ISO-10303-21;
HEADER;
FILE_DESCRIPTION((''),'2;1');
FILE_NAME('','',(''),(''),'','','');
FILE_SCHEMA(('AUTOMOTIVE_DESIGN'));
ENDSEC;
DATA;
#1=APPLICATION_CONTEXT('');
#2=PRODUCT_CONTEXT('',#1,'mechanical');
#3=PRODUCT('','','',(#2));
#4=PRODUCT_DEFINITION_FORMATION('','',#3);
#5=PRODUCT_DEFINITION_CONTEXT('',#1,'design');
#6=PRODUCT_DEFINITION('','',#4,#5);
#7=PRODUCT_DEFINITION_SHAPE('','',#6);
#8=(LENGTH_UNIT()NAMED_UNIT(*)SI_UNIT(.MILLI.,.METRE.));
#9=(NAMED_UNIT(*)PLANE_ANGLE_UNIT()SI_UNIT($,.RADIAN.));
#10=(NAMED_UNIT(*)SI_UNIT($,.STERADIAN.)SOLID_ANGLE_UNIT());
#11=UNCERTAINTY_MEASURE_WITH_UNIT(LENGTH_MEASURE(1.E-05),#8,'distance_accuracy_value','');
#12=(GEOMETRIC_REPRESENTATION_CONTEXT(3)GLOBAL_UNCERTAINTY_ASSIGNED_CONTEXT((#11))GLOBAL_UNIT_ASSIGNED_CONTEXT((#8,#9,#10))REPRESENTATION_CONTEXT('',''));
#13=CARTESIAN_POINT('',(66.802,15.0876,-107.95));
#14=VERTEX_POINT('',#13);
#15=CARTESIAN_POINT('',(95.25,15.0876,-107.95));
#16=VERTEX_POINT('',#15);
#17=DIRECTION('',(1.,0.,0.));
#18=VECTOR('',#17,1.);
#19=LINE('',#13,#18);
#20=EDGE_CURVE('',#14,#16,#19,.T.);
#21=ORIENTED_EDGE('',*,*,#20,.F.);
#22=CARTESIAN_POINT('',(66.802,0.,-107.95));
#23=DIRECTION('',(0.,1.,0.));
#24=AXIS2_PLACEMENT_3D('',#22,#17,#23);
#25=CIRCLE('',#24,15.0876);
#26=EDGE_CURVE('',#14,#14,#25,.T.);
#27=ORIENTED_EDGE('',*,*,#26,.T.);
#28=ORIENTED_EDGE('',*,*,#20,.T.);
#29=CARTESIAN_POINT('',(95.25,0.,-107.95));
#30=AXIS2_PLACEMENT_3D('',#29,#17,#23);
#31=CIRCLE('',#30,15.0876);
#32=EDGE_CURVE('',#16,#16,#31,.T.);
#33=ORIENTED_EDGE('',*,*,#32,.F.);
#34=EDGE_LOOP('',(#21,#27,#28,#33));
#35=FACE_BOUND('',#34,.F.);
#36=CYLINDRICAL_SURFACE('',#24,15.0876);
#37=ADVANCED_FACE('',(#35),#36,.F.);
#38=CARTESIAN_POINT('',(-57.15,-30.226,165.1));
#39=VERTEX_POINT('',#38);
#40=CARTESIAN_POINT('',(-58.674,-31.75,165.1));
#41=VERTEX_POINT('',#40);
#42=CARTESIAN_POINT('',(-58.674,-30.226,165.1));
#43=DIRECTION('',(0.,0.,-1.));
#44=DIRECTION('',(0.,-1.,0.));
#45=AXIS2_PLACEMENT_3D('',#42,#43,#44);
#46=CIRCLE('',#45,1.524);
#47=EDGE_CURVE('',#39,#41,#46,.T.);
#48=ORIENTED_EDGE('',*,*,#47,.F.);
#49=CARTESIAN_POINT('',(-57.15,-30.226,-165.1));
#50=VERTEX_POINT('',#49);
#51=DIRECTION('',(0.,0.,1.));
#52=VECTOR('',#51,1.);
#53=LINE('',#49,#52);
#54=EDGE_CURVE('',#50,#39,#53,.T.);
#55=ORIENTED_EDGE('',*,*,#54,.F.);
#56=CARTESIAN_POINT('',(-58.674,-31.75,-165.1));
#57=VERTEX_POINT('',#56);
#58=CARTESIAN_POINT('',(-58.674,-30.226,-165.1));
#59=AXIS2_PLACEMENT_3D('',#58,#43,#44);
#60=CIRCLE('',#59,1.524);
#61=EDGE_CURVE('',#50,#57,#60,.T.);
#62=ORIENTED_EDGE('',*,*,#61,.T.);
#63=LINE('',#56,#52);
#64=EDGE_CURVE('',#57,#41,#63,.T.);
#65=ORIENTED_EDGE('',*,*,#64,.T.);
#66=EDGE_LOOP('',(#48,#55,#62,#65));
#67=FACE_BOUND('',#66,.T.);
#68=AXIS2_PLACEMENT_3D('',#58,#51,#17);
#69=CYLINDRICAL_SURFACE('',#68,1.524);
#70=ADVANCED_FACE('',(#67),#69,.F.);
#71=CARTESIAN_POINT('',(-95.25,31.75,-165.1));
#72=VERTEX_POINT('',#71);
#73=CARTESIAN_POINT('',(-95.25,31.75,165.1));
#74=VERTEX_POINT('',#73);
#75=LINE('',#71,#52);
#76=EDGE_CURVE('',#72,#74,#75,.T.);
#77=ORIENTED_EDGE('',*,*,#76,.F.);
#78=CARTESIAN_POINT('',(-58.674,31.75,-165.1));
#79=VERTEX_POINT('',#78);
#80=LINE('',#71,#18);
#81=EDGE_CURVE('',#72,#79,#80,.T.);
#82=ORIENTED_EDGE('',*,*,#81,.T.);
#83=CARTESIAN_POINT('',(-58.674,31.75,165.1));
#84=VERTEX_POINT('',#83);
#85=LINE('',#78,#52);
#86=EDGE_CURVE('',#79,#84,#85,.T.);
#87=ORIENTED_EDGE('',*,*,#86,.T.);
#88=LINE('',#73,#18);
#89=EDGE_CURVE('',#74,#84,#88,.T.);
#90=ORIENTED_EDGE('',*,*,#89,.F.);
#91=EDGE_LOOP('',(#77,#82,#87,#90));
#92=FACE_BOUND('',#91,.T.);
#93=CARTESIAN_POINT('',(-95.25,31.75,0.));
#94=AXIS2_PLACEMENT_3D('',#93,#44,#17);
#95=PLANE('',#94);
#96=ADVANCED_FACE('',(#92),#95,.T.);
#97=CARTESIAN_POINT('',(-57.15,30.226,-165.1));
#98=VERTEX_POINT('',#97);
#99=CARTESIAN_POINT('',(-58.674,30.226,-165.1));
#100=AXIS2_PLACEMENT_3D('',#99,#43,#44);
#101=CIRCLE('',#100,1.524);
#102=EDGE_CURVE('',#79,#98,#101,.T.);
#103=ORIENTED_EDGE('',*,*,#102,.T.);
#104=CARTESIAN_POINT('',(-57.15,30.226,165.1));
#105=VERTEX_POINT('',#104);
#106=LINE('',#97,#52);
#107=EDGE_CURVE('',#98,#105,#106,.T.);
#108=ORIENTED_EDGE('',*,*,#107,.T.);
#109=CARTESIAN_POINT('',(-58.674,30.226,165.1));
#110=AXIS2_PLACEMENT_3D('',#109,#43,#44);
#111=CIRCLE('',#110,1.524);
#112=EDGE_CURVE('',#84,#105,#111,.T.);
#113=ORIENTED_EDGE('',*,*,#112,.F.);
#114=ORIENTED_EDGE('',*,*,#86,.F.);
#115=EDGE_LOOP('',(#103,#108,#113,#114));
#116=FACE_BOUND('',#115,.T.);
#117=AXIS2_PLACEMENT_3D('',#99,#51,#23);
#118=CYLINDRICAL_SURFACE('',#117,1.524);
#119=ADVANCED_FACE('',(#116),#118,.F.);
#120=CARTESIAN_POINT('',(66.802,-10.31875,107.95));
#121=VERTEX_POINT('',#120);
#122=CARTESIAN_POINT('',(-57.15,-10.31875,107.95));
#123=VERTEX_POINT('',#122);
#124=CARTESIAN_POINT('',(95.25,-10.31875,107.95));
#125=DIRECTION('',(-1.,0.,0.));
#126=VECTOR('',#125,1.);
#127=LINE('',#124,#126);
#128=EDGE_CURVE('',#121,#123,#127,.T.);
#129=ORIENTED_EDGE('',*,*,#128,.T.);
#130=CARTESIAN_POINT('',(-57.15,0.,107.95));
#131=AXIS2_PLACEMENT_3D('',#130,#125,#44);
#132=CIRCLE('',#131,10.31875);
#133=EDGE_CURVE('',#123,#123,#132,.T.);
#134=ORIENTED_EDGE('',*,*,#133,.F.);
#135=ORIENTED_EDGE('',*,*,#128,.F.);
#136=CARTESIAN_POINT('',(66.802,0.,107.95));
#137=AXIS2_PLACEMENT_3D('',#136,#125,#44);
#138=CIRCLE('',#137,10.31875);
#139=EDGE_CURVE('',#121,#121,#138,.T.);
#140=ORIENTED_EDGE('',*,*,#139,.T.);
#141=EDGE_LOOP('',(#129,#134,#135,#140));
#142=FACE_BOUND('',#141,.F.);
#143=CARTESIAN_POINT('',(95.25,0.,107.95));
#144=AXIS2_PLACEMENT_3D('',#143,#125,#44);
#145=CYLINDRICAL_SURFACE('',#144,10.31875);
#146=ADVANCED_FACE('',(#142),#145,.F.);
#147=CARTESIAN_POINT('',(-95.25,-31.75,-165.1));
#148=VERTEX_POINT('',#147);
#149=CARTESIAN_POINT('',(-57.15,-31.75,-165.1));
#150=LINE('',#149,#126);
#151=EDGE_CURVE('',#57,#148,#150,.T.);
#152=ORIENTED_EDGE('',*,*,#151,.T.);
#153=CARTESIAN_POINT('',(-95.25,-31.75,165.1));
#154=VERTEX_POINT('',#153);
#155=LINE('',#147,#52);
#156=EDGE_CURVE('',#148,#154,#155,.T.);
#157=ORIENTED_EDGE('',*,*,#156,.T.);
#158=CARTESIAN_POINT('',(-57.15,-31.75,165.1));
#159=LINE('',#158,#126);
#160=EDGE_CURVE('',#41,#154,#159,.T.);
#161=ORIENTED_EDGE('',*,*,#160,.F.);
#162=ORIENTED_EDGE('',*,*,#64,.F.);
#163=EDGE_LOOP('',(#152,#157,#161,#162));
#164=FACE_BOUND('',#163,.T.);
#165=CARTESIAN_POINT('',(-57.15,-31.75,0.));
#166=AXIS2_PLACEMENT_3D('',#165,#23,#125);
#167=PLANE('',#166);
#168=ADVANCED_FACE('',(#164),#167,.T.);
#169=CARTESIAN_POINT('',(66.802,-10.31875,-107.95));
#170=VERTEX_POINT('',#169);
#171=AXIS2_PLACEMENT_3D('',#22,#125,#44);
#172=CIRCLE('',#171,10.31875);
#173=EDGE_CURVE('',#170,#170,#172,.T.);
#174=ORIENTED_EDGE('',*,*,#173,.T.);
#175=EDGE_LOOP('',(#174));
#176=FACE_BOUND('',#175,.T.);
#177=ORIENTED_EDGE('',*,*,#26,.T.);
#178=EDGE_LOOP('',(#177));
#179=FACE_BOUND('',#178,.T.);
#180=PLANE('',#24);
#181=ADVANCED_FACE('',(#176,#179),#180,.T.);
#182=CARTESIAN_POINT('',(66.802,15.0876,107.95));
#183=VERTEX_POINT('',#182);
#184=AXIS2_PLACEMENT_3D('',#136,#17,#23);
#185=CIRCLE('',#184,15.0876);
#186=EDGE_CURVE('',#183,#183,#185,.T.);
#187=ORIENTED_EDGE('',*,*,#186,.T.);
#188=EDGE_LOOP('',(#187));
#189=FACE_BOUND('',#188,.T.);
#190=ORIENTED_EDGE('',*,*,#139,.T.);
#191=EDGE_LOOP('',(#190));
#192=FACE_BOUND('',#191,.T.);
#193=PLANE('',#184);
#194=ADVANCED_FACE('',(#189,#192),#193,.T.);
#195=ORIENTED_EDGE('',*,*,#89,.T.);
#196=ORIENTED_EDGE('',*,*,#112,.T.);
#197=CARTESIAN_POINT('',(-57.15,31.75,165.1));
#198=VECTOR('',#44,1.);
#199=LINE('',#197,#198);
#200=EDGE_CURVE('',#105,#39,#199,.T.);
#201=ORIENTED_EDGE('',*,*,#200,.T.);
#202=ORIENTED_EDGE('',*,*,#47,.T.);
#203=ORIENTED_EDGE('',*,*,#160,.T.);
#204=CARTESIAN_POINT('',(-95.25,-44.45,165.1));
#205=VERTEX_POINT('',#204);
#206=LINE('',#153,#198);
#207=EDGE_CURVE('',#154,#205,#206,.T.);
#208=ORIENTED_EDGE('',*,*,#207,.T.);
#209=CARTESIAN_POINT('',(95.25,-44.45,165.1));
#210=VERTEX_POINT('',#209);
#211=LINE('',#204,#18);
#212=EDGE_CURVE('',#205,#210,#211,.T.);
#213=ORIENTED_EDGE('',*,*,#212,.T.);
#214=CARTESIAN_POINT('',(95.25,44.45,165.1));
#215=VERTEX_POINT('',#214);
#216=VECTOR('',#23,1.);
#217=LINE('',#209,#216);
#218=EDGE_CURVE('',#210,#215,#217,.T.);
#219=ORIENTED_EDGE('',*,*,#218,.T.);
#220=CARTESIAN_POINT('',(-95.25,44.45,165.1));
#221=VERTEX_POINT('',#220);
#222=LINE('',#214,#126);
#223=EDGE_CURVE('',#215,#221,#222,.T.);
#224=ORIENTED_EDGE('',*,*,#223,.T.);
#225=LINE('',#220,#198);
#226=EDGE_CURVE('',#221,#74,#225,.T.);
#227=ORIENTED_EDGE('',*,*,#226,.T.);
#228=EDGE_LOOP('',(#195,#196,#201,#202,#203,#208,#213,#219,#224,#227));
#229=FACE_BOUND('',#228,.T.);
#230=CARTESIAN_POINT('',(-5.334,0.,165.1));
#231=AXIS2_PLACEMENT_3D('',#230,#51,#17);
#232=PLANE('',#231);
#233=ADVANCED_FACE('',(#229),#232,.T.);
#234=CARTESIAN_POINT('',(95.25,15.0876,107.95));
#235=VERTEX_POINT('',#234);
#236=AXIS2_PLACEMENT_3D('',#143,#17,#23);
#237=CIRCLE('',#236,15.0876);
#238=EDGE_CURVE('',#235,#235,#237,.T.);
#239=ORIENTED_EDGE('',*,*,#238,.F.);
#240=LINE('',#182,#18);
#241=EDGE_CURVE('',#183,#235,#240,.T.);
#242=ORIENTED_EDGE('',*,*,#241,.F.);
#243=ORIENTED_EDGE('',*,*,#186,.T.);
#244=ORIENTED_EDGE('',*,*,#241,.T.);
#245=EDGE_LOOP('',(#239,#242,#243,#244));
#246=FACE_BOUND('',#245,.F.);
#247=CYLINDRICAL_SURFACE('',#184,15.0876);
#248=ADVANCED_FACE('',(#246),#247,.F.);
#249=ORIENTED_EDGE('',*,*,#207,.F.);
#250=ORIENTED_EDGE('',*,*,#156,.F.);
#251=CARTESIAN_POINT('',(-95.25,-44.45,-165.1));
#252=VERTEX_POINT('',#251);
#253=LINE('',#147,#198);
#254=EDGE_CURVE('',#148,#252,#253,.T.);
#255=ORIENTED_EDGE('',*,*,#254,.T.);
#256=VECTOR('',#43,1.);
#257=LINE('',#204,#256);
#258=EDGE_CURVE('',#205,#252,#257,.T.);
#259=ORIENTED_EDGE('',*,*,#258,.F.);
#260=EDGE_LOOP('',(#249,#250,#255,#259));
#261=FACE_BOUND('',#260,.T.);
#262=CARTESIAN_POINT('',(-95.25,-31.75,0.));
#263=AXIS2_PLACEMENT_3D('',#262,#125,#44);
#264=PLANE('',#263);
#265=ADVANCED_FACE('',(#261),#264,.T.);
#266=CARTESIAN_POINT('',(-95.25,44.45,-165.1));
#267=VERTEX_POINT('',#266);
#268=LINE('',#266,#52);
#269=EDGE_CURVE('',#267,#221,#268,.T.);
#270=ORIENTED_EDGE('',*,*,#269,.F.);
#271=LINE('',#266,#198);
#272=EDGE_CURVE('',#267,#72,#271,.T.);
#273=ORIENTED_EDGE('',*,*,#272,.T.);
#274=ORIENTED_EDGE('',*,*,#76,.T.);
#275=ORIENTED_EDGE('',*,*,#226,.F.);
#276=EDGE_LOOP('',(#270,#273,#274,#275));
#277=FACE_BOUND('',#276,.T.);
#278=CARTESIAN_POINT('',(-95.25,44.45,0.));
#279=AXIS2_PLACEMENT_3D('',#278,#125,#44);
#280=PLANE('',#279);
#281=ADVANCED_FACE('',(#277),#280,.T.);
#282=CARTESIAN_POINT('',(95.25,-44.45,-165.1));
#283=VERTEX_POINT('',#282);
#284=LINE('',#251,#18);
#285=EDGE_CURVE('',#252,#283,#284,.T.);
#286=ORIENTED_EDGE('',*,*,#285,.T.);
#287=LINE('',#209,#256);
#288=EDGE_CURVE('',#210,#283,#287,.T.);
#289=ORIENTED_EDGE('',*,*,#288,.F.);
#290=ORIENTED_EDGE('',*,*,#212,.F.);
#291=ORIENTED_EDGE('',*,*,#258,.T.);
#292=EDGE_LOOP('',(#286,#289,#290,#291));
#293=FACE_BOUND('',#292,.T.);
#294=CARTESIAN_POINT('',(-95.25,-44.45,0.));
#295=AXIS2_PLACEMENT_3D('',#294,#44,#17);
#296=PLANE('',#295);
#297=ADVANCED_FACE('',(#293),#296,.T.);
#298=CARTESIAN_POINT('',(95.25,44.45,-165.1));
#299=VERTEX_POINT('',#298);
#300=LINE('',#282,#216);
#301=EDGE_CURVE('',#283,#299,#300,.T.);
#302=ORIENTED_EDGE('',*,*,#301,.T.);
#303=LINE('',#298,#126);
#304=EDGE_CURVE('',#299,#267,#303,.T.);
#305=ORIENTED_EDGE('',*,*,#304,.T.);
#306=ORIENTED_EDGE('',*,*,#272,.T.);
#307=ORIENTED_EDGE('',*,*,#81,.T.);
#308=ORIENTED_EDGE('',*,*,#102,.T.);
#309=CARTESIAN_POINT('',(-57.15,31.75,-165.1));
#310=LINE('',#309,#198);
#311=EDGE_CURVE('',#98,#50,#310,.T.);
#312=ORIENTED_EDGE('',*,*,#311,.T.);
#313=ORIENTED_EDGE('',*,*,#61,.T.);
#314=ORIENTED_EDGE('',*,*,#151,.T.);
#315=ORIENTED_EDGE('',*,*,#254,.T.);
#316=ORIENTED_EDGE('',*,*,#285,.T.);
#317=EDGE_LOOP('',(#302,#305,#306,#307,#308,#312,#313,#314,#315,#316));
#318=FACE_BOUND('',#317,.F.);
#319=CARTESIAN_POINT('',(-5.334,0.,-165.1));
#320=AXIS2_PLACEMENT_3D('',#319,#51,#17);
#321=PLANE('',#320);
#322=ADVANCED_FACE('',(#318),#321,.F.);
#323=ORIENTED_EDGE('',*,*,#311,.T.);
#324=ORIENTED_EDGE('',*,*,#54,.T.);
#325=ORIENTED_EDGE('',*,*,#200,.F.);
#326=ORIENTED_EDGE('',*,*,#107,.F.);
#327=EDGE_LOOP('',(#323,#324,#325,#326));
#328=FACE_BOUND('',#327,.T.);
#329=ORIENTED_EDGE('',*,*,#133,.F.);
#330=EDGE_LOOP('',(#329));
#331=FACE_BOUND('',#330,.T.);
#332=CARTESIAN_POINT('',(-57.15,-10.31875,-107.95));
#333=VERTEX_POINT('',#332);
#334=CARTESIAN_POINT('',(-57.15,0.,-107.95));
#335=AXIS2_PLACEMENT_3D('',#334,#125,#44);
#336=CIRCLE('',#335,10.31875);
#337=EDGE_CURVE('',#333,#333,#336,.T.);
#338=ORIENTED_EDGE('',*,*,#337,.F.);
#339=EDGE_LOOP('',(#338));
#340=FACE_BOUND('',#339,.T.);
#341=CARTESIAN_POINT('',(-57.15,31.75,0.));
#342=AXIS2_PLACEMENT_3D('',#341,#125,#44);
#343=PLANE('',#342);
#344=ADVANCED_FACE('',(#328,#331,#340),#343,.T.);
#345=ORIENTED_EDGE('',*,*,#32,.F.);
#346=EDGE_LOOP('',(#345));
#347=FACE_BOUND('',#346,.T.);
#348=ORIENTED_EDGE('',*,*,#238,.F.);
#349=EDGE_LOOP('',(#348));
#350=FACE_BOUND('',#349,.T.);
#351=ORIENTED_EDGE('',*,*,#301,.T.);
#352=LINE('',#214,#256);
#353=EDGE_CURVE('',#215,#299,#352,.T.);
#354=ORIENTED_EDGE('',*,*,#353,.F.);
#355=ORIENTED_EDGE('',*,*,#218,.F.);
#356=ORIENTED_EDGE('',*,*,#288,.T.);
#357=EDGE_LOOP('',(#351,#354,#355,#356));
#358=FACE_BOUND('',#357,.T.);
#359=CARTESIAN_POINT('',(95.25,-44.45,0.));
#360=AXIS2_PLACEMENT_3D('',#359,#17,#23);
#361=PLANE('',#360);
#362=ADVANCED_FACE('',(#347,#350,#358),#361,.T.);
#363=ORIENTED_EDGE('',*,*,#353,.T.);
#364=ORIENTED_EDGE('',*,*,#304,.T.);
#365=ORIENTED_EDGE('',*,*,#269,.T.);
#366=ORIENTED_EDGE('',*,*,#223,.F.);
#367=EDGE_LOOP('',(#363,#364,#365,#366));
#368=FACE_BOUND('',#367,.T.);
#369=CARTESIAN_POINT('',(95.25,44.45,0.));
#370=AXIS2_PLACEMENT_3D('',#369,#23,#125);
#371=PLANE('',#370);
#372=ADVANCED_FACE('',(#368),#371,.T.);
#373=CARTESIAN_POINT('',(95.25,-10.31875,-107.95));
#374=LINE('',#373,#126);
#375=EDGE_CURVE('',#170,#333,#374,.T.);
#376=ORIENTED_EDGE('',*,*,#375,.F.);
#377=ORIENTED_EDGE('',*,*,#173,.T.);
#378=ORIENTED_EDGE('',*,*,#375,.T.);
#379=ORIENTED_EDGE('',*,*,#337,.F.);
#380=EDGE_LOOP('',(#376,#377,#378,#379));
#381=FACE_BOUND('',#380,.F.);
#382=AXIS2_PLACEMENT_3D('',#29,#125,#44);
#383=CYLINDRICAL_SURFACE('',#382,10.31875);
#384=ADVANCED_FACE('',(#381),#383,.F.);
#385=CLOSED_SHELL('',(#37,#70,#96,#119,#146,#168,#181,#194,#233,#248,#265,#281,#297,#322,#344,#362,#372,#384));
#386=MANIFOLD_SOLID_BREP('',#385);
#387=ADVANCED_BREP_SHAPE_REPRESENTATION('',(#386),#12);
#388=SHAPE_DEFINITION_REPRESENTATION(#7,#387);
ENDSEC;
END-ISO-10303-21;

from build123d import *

# Parameters (mm, degrees)
F1_DEPTH       = 165.1
F3_D           = 20.6375
F3_CBORE_D     = 30.1752
F3_CBORE_DEPTH = 28.448
F4_R           = 1.524


# Not quite as in the source:
# - a length typed as a fraction of an inch, garbled in the dataset ("3 / 203.2 mm" for 3/8 in), is restored


with BuildPart() as f1:
    # F0 (on Top) → F1 (new body, symmetric)
    with BuildSketch(Plane.XY):
        Polygon((95.25, 44.45), (-95.25, 44.45), (-95.25, 31.75), (-57.15, 31.75), (-57.15, -31.75), (-95.25, -31.75), (-95.25, -44.45), (95.25, -44.45), align=None)
    extrude(amount=F1_DEPTH, both=True)

    # F3 (through all)
    with Locations(Plane.YZ.offset(95.25)):
        with Locations((0, 107.95), (0, -107.95)):
            CounterBoreHole(F3_D / 2, F3_CBORE_D / 2, F3_CBORE_DEPTH)

    # F4
    f4_edges = [f1.edges().sort_by_distance(p)[0] for p in [
        (-57.15, 31.75, 0),
        (-57.15, -31.75, 0),
    ]]
    fillet(f4_edges, radius=F4_R)


solid = f1.part
